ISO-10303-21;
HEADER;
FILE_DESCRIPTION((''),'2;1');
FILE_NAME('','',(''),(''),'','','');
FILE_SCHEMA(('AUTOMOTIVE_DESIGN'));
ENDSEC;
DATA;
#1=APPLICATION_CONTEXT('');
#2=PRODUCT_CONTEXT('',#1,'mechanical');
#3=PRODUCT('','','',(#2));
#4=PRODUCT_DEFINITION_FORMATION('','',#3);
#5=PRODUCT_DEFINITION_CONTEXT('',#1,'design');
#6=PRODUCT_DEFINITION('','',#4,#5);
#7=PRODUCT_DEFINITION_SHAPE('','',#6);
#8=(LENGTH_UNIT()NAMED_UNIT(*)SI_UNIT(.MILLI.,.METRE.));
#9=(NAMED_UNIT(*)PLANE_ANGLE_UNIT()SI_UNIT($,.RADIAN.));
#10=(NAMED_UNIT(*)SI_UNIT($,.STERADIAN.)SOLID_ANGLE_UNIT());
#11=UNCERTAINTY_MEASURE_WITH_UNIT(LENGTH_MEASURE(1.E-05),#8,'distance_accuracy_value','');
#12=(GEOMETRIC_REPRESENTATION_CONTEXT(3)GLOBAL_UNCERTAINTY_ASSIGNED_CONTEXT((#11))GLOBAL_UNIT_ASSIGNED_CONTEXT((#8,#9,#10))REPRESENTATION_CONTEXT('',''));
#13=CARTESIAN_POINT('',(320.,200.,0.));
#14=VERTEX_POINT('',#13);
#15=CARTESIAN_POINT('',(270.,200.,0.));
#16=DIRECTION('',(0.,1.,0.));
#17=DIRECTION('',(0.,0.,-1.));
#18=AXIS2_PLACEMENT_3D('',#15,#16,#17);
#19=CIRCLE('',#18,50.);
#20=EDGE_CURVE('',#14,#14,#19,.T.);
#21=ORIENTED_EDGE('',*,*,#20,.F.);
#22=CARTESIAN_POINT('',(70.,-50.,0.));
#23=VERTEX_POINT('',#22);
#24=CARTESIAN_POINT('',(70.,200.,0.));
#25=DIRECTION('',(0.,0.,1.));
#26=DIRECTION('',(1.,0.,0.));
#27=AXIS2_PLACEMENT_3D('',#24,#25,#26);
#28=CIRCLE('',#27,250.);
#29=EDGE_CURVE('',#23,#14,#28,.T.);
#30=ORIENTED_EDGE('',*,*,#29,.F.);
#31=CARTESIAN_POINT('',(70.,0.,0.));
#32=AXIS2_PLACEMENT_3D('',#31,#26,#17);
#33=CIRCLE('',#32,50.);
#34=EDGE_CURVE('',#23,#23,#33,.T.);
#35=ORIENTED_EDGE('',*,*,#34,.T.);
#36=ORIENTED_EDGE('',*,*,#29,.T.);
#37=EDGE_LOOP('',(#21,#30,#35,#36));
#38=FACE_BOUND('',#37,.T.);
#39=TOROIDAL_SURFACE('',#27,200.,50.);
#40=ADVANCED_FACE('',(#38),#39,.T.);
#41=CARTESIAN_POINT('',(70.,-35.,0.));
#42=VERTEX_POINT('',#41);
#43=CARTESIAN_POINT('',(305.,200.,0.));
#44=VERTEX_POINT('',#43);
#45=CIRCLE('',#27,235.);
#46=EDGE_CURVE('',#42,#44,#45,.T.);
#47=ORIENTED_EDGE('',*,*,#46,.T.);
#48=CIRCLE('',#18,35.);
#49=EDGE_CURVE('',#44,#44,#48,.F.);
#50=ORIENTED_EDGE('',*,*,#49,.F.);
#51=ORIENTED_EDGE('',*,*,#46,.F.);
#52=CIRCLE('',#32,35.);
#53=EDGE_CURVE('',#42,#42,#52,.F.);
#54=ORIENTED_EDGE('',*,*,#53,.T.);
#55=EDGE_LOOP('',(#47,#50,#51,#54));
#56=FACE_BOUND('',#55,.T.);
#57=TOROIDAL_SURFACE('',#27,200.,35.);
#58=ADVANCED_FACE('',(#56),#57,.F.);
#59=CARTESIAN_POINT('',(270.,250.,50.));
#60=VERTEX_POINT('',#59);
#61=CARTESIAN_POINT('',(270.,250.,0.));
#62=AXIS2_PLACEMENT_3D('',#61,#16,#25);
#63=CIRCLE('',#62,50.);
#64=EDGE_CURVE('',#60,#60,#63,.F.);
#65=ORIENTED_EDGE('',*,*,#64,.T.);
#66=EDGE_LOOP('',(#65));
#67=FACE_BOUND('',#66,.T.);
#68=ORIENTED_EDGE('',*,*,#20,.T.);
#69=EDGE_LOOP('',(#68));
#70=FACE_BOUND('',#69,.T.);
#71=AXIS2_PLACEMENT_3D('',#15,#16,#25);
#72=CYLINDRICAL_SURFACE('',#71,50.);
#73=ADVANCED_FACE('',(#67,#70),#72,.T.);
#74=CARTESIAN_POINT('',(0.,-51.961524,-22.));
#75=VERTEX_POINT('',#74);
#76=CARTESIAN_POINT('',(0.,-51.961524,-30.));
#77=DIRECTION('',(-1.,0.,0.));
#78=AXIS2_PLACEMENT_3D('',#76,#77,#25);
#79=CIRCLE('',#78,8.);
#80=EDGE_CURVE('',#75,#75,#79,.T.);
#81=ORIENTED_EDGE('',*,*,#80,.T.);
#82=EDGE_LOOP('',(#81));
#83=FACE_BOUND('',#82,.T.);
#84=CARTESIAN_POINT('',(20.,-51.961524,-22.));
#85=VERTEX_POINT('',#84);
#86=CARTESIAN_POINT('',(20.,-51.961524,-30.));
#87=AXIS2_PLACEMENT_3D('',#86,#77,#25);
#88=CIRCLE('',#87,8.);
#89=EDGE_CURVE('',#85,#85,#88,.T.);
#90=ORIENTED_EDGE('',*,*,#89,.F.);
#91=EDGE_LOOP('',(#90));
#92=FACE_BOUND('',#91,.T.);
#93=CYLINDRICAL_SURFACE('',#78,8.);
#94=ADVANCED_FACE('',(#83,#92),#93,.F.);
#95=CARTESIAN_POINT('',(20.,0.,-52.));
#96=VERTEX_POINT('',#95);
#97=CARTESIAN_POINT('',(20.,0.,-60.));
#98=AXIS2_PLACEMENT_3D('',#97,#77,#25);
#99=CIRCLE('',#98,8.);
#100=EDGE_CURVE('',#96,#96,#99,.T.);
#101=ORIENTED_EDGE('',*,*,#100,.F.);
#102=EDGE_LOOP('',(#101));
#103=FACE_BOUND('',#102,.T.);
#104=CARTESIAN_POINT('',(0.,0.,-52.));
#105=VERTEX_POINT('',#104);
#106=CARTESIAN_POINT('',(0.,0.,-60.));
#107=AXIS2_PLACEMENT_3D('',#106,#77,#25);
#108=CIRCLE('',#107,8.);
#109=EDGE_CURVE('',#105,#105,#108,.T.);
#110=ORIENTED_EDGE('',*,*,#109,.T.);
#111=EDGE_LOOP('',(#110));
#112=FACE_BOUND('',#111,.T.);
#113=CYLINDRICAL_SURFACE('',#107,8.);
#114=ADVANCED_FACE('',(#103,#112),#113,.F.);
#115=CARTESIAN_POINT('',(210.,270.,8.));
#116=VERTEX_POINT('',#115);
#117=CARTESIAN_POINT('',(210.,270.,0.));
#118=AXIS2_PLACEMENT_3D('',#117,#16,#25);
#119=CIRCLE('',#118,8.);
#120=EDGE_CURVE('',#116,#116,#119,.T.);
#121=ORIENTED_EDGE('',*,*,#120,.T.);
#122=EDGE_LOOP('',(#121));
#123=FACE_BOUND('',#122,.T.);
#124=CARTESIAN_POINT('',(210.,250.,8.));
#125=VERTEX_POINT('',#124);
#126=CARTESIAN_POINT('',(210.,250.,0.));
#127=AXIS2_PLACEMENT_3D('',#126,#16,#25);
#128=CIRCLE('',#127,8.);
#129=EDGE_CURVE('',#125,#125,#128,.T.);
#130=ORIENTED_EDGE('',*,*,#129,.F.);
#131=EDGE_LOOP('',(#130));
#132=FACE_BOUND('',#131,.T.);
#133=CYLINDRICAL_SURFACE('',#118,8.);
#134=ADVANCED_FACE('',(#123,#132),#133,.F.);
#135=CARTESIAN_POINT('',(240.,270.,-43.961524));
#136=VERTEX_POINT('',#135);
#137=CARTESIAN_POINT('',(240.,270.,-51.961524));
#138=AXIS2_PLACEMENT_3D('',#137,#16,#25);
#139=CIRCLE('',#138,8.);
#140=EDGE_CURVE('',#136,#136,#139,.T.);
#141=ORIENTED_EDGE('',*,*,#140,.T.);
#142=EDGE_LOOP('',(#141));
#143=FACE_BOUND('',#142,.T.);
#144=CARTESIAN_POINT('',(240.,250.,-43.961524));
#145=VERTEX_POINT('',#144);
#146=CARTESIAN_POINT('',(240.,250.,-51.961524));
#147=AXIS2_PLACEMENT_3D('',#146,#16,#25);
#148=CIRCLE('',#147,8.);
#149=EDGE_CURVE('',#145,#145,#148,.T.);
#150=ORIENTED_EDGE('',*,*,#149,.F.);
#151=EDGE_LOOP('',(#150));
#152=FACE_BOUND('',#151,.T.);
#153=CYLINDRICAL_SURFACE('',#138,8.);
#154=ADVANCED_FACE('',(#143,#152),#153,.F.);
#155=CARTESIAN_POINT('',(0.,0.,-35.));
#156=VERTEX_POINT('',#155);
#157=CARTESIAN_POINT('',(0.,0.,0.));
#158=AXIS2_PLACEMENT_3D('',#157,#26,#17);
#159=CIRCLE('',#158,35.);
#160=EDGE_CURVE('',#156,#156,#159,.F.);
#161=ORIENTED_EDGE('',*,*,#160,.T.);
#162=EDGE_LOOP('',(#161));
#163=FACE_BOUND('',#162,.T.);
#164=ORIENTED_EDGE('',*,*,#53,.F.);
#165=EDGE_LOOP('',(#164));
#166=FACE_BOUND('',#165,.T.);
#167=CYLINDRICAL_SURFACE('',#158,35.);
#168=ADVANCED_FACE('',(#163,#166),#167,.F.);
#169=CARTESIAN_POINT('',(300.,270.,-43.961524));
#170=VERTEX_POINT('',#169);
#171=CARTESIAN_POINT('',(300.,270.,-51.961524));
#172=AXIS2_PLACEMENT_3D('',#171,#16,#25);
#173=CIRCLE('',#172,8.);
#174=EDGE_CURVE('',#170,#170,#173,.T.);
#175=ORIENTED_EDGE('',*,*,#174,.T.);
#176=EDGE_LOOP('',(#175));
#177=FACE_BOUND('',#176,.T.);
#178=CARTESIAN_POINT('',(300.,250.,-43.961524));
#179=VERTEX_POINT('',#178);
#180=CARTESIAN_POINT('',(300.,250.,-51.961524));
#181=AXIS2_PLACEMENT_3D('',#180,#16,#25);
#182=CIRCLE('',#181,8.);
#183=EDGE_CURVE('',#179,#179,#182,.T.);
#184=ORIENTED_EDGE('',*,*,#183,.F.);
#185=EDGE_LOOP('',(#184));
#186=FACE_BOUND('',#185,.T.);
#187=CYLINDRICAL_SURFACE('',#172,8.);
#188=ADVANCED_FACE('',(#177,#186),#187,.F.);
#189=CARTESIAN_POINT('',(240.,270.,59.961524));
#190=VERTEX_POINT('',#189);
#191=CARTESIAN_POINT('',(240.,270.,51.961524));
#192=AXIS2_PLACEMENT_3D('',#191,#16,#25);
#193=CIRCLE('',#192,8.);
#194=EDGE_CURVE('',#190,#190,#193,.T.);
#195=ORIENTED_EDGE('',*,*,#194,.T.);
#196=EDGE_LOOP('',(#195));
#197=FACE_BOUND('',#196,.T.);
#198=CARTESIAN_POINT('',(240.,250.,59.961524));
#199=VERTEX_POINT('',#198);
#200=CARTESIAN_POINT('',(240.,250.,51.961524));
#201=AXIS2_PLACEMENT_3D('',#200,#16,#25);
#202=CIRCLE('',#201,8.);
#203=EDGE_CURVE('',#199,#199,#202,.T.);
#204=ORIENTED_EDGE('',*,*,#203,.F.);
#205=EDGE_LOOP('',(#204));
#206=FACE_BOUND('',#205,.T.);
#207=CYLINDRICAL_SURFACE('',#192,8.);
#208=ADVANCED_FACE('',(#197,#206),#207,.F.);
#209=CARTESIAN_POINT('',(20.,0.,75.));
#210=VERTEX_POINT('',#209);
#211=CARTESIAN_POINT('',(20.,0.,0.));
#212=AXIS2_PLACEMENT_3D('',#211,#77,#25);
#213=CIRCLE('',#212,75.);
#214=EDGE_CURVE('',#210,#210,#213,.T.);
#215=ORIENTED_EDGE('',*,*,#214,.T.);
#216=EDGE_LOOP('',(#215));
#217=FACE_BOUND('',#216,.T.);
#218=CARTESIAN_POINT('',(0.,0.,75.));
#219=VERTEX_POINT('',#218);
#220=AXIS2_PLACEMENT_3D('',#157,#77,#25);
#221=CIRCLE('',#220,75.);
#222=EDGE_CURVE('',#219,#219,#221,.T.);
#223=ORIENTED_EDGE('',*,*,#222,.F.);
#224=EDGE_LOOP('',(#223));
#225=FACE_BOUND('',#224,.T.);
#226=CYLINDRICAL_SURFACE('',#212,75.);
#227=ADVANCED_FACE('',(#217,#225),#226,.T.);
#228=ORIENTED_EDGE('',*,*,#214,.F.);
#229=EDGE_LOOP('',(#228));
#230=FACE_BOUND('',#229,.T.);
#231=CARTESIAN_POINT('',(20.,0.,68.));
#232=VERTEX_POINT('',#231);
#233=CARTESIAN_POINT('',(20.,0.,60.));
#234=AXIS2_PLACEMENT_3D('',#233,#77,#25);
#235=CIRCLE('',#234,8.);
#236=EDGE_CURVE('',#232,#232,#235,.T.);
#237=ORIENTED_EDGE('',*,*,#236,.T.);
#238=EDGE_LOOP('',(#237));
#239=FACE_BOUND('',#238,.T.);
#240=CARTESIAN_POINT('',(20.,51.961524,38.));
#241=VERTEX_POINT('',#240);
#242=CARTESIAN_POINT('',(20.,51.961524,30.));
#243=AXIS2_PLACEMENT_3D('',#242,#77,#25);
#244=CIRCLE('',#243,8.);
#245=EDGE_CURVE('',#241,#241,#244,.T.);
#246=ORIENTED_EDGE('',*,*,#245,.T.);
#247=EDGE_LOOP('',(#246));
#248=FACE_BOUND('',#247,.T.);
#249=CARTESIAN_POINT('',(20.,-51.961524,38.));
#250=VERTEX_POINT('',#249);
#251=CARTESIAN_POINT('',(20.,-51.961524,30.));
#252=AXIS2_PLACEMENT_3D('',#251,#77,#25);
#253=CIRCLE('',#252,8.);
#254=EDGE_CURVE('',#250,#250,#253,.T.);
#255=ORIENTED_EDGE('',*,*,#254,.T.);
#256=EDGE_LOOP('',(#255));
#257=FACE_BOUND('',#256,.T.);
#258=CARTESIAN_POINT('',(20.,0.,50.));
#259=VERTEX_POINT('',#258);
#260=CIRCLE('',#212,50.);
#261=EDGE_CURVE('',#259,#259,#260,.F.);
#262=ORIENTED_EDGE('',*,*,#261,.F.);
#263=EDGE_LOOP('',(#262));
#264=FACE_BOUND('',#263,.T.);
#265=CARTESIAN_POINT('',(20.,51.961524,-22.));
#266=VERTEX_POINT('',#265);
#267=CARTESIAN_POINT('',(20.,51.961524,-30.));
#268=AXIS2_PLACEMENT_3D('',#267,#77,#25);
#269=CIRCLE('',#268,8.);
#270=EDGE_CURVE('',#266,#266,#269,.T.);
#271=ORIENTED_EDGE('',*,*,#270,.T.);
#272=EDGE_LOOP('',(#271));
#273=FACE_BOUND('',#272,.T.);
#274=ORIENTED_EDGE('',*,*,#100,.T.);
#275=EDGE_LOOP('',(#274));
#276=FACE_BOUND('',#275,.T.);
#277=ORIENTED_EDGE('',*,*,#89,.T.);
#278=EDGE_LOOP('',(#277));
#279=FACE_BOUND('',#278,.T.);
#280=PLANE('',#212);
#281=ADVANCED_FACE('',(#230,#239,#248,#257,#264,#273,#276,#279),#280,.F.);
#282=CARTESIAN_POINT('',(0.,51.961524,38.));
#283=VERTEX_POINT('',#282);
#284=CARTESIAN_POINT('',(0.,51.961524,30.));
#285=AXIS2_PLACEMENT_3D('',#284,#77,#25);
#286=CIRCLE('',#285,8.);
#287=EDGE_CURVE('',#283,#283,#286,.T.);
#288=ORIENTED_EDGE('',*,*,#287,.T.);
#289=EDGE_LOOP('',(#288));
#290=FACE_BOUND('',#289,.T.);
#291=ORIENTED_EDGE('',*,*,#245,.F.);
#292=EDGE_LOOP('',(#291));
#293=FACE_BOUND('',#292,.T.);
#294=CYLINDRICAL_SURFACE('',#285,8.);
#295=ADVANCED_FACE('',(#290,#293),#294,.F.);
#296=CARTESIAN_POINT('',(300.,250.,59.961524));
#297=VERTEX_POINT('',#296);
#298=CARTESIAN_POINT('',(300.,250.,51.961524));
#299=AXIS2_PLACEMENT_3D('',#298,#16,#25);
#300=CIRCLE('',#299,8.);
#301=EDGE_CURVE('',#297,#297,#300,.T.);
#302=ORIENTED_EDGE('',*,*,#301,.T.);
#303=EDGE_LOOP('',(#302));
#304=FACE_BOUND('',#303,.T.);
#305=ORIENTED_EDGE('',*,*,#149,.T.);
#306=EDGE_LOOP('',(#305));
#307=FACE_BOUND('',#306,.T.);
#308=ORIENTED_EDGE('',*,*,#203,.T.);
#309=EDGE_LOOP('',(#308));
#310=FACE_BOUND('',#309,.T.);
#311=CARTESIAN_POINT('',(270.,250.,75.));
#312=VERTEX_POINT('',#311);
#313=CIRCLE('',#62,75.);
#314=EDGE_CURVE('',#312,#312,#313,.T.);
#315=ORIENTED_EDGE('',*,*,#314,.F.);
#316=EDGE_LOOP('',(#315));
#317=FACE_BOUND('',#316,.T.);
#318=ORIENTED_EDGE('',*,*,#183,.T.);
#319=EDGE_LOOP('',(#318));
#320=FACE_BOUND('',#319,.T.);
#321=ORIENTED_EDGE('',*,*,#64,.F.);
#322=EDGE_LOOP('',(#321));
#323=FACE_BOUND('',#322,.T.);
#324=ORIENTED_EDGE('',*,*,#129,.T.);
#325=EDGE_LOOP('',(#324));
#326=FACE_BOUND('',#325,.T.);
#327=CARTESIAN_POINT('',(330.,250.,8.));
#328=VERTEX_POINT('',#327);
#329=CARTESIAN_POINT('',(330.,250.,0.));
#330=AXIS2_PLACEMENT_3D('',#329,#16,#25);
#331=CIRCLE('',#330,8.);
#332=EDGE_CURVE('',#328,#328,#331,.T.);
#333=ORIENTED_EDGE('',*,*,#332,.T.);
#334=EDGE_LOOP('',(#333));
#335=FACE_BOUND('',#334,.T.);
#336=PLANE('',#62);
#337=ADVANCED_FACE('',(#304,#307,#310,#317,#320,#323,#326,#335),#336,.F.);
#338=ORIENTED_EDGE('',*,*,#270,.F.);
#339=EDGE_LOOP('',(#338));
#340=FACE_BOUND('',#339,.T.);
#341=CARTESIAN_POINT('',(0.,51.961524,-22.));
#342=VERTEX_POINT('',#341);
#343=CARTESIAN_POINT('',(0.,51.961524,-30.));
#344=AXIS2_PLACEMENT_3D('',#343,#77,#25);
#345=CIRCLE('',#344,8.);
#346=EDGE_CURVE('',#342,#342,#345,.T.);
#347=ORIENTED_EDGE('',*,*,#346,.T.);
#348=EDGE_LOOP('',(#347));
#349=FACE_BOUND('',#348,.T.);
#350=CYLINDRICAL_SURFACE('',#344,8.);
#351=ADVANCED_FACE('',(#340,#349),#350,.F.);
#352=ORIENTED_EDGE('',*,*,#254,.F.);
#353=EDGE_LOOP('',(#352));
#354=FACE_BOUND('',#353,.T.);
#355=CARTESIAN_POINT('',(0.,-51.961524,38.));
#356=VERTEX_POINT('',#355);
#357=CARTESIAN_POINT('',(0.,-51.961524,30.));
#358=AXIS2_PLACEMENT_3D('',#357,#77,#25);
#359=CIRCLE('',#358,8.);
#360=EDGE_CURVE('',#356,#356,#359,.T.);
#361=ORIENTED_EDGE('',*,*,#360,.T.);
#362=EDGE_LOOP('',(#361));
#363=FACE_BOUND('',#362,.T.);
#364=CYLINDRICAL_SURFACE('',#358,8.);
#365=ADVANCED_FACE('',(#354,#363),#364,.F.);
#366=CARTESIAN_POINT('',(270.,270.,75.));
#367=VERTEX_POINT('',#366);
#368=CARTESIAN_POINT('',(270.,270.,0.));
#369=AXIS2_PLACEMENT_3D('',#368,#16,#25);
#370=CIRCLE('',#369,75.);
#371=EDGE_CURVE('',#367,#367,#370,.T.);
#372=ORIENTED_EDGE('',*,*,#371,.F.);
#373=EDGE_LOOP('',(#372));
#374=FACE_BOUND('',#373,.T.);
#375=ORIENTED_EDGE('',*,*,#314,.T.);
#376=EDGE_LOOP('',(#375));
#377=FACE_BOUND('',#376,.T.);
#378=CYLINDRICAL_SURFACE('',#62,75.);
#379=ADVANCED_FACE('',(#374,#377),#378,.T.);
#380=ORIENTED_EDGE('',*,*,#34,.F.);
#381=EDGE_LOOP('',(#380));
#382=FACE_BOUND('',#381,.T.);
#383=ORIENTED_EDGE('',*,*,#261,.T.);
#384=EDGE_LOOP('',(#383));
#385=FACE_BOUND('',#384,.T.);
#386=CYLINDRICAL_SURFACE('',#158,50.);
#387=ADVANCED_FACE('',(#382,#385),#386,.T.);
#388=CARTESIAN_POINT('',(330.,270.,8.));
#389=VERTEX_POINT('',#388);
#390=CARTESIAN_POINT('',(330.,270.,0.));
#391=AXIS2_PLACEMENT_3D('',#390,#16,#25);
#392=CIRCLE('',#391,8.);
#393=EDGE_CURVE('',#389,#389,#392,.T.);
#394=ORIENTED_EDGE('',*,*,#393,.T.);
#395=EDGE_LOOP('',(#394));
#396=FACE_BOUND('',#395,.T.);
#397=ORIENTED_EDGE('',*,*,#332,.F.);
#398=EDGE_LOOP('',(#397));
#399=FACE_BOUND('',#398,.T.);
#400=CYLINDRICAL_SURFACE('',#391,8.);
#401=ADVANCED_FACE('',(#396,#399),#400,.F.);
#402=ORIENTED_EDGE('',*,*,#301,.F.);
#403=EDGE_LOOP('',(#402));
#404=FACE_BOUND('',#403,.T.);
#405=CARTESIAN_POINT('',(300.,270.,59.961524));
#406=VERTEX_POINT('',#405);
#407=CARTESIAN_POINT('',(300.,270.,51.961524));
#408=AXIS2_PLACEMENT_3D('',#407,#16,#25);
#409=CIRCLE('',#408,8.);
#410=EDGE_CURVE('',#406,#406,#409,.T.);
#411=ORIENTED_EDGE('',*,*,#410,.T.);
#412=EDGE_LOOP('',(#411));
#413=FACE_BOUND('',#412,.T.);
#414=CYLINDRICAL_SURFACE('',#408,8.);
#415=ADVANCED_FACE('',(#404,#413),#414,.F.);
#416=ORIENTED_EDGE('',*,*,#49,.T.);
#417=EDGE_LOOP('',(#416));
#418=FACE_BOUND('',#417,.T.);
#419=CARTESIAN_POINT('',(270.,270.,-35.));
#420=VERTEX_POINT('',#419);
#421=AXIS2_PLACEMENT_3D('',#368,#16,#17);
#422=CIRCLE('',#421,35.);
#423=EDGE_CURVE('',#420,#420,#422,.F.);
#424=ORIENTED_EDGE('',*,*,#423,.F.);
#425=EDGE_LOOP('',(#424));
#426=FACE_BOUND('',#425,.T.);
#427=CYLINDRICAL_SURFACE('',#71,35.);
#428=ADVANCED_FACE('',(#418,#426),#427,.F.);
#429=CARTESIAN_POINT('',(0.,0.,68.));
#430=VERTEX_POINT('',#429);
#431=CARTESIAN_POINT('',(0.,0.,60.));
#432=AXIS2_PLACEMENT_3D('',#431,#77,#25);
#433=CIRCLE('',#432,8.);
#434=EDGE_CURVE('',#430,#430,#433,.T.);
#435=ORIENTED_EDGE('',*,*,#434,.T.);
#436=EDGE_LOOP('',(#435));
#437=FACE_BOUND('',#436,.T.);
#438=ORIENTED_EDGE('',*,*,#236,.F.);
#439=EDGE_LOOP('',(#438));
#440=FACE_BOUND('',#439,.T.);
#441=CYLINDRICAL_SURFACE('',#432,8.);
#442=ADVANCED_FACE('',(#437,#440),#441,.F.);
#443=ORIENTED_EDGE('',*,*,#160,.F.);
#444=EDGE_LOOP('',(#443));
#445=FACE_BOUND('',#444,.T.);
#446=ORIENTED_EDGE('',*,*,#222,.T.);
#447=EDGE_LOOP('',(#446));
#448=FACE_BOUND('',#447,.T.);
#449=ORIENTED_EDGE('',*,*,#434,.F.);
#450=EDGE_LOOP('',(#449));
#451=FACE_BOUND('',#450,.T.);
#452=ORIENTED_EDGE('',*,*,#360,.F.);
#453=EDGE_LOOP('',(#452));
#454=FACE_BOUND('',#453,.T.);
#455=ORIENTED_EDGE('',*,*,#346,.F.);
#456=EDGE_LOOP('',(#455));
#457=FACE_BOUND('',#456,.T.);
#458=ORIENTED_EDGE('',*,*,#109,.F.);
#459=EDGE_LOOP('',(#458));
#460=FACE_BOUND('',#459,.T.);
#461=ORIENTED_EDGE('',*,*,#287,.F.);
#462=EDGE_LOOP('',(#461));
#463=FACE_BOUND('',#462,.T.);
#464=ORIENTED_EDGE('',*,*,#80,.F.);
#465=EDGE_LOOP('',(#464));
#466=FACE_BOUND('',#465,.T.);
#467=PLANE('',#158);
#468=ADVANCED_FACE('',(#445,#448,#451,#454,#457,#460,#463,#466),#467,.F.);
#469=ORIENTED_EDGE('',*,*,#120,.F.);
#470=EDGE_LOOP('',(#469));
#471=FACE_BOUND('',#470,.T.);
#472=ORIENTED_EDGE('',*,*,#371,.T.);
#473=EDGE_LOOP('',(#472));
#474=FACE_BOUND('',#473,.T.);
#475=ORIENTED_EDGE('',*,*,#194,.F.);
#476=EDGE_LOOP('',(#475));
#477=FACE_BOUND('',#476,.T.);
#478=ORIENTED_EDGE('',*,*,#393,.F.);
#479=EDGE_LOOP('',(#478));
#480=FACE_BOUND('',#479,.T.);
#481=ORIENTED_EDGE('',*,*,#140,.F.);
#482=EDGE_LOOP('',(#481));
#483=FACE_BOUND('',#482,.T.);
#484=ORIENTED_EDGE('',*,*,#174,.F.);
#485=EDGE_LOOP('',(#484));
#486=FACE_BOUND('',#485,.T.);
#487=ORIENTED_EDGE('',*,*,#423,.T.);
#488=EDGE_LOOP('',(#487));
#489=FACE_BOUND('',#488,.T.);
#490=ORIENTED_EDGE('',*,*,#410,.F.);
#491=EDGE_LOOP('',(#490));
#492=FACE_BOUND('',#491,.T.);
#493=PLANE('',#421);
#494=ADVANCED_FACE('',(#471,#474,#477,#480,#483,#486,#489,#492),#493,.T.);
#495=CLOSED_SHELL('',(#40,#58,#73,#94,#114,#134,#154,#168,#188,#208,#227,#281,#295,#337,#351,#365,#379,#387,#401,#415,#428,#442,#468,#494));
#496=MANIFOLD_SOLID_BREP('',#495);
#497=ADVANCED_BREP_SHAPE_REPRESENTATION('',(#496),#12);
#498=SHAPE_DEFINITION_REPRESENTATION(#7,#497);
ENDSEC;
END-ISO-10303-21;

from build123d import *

# Parameters (mm, degrees)
SKETCH2_R             = 50
SKETCH2_R_2           = 35
SKETCH3_R             = 75
SKETCH3_R_2           = 35
BOSS_EXTRUDE1_DEPTH   = 20
BOSS_EXTRUDE2_START   = -20
SKETCH4_R             = 75
SKETCH4_R_2           = 35
BOSS_EXTRUDE2_DEPTH   = 20
HOLE1_D               = 16
CIRPATTERN1_OUTLINE_R = 8
CIRPATTERN1_DEPTH     = 20
HOLE2_D               = 16
CIRPATTERN2_START     = 250
CIRPATTERN2_OUTLINE_R = 8
CIRPATTERN2_DEPTH     = 20


# Read off the part's stored shape, not the designer's step: CirPattern1, CirPattern2
with BuildPart() as part:
    # Sweep1: sweep along a path in Sketch1
    with BuildLine(Plane.XY) as sweep1_path:
        Line((0, 0), (70, 0))
        ThreePointArc((70, 0), (211.421356237, 58.578643763), (270, 200))
        Line((270, 200), (270, 270))
    # Sketch2 → Sweep1 (sweep)
    with BuildSketch(Plane(origin=(0, 0, 0), x_dir=(0, 0, -1), z_dir=(1, 0, 0))):
        Circle(SKETCH2_R)
        Circle(SKETCH2_R_2, mode=Mode.SUBTRACT)
    sweep(path=sweep1_path.line)

    # Sketch3 → Boss-Extrude1 (add)
    with BuildSketch(Plane(origin=(0, 270, 0), x_dir=(1, 0, 0), z_dir=(0, 1, 0))):
        with Locations(Location((270, 0, 0), (0, 0, 270))):
            Circle(SKETCH3_R)
        with Locations((270, 0)):
            Circle(SKETCH3_R_2, mode=Mode.SUBTRACT)
    extrude(amount=-BOSS_EXTRUDE1_DEPTH)

    # Sketch4 → Boss-Extrude2 (add)
    with BuildSketch(Plane.ZY.offset(BOSS_EXTRUDE2_START)):
        Circle(SKETCH4_R)
        with Locations(Location((0, 0, 0), (0, 0, 180))):
            Circle(SKETCH4_R_2, mode=Mode.SUBTRACT)
    extrude(amount=BOSS_EXTRUDE2_DEPTH)

    # Hole1 (through all)
    with Locations(Plane.ZY):
        with Locations((60, 0)):
            Hole(HOLE1_D / 2)

    # CirPattern1 outline → CirPattern1 (cut)
    with BuildSketch(Plane.YZ):
        with Locations((51.961524227, 30)):
            Circle(CIRPATTERN1_OUTLINE_R)
        with Locations((51.961524227, -30)):
            Circle(CIRPATTERN1_OUTLINE_R)
        with Locations((0, -60)):
            Circle(CIRPATTERN1_OUTLINE_R)
        with Locations((-51.961524227, -30)):
            Circle(CIRPATTERN1_OUTLINE_R)
        with Locations((-51.961524227, 30)):
            Circle(CIRPATTERN1_OUTLINE_R)
    extrude(amount=CIRPATTERN1_DEPTH, mode=Mode.SUBTRACT)

    # Hole2 (through all)
    with Locations(Plane(origin=(0, 270, 0), x_dir=(1, 0, 0), z_dir=(0, 1, 0))):
        with Locations((330, 0)):
            Hole(HOLE2_D / 2)

    # CirPattern2 outline → CirPattern2 (cut)
    with BuildSketch(Plane(origin=(0, 0, 0), x_dir=(1, 0, 0), z_dir=(0, 1, 0)).offset(CIRPATTERN2_START)):
        with Locations((300, -51.961524227)):
            Circle(CIRPATTERN2_OUTLINE_R)
        with Locations((240, -51.961524227)):
            Circle(CIRPATTERN2_OUTLINE_R)
        with Locations((210, 0)):
            Circle(CIRPATTERN2_OUTLINE_R)
        with Locations((240, 51.961524227)):
            Circle(CIRPATTERN2_OUTLINE_R)
        with Locations((300, 51.961524227)):
            Circle(CIRPATTERN2_OUTLINE_R)
    extrude(amount=CIRPATTERN2_DEPTH, mode=Mode.SUBTRACT)


solid = part.part
